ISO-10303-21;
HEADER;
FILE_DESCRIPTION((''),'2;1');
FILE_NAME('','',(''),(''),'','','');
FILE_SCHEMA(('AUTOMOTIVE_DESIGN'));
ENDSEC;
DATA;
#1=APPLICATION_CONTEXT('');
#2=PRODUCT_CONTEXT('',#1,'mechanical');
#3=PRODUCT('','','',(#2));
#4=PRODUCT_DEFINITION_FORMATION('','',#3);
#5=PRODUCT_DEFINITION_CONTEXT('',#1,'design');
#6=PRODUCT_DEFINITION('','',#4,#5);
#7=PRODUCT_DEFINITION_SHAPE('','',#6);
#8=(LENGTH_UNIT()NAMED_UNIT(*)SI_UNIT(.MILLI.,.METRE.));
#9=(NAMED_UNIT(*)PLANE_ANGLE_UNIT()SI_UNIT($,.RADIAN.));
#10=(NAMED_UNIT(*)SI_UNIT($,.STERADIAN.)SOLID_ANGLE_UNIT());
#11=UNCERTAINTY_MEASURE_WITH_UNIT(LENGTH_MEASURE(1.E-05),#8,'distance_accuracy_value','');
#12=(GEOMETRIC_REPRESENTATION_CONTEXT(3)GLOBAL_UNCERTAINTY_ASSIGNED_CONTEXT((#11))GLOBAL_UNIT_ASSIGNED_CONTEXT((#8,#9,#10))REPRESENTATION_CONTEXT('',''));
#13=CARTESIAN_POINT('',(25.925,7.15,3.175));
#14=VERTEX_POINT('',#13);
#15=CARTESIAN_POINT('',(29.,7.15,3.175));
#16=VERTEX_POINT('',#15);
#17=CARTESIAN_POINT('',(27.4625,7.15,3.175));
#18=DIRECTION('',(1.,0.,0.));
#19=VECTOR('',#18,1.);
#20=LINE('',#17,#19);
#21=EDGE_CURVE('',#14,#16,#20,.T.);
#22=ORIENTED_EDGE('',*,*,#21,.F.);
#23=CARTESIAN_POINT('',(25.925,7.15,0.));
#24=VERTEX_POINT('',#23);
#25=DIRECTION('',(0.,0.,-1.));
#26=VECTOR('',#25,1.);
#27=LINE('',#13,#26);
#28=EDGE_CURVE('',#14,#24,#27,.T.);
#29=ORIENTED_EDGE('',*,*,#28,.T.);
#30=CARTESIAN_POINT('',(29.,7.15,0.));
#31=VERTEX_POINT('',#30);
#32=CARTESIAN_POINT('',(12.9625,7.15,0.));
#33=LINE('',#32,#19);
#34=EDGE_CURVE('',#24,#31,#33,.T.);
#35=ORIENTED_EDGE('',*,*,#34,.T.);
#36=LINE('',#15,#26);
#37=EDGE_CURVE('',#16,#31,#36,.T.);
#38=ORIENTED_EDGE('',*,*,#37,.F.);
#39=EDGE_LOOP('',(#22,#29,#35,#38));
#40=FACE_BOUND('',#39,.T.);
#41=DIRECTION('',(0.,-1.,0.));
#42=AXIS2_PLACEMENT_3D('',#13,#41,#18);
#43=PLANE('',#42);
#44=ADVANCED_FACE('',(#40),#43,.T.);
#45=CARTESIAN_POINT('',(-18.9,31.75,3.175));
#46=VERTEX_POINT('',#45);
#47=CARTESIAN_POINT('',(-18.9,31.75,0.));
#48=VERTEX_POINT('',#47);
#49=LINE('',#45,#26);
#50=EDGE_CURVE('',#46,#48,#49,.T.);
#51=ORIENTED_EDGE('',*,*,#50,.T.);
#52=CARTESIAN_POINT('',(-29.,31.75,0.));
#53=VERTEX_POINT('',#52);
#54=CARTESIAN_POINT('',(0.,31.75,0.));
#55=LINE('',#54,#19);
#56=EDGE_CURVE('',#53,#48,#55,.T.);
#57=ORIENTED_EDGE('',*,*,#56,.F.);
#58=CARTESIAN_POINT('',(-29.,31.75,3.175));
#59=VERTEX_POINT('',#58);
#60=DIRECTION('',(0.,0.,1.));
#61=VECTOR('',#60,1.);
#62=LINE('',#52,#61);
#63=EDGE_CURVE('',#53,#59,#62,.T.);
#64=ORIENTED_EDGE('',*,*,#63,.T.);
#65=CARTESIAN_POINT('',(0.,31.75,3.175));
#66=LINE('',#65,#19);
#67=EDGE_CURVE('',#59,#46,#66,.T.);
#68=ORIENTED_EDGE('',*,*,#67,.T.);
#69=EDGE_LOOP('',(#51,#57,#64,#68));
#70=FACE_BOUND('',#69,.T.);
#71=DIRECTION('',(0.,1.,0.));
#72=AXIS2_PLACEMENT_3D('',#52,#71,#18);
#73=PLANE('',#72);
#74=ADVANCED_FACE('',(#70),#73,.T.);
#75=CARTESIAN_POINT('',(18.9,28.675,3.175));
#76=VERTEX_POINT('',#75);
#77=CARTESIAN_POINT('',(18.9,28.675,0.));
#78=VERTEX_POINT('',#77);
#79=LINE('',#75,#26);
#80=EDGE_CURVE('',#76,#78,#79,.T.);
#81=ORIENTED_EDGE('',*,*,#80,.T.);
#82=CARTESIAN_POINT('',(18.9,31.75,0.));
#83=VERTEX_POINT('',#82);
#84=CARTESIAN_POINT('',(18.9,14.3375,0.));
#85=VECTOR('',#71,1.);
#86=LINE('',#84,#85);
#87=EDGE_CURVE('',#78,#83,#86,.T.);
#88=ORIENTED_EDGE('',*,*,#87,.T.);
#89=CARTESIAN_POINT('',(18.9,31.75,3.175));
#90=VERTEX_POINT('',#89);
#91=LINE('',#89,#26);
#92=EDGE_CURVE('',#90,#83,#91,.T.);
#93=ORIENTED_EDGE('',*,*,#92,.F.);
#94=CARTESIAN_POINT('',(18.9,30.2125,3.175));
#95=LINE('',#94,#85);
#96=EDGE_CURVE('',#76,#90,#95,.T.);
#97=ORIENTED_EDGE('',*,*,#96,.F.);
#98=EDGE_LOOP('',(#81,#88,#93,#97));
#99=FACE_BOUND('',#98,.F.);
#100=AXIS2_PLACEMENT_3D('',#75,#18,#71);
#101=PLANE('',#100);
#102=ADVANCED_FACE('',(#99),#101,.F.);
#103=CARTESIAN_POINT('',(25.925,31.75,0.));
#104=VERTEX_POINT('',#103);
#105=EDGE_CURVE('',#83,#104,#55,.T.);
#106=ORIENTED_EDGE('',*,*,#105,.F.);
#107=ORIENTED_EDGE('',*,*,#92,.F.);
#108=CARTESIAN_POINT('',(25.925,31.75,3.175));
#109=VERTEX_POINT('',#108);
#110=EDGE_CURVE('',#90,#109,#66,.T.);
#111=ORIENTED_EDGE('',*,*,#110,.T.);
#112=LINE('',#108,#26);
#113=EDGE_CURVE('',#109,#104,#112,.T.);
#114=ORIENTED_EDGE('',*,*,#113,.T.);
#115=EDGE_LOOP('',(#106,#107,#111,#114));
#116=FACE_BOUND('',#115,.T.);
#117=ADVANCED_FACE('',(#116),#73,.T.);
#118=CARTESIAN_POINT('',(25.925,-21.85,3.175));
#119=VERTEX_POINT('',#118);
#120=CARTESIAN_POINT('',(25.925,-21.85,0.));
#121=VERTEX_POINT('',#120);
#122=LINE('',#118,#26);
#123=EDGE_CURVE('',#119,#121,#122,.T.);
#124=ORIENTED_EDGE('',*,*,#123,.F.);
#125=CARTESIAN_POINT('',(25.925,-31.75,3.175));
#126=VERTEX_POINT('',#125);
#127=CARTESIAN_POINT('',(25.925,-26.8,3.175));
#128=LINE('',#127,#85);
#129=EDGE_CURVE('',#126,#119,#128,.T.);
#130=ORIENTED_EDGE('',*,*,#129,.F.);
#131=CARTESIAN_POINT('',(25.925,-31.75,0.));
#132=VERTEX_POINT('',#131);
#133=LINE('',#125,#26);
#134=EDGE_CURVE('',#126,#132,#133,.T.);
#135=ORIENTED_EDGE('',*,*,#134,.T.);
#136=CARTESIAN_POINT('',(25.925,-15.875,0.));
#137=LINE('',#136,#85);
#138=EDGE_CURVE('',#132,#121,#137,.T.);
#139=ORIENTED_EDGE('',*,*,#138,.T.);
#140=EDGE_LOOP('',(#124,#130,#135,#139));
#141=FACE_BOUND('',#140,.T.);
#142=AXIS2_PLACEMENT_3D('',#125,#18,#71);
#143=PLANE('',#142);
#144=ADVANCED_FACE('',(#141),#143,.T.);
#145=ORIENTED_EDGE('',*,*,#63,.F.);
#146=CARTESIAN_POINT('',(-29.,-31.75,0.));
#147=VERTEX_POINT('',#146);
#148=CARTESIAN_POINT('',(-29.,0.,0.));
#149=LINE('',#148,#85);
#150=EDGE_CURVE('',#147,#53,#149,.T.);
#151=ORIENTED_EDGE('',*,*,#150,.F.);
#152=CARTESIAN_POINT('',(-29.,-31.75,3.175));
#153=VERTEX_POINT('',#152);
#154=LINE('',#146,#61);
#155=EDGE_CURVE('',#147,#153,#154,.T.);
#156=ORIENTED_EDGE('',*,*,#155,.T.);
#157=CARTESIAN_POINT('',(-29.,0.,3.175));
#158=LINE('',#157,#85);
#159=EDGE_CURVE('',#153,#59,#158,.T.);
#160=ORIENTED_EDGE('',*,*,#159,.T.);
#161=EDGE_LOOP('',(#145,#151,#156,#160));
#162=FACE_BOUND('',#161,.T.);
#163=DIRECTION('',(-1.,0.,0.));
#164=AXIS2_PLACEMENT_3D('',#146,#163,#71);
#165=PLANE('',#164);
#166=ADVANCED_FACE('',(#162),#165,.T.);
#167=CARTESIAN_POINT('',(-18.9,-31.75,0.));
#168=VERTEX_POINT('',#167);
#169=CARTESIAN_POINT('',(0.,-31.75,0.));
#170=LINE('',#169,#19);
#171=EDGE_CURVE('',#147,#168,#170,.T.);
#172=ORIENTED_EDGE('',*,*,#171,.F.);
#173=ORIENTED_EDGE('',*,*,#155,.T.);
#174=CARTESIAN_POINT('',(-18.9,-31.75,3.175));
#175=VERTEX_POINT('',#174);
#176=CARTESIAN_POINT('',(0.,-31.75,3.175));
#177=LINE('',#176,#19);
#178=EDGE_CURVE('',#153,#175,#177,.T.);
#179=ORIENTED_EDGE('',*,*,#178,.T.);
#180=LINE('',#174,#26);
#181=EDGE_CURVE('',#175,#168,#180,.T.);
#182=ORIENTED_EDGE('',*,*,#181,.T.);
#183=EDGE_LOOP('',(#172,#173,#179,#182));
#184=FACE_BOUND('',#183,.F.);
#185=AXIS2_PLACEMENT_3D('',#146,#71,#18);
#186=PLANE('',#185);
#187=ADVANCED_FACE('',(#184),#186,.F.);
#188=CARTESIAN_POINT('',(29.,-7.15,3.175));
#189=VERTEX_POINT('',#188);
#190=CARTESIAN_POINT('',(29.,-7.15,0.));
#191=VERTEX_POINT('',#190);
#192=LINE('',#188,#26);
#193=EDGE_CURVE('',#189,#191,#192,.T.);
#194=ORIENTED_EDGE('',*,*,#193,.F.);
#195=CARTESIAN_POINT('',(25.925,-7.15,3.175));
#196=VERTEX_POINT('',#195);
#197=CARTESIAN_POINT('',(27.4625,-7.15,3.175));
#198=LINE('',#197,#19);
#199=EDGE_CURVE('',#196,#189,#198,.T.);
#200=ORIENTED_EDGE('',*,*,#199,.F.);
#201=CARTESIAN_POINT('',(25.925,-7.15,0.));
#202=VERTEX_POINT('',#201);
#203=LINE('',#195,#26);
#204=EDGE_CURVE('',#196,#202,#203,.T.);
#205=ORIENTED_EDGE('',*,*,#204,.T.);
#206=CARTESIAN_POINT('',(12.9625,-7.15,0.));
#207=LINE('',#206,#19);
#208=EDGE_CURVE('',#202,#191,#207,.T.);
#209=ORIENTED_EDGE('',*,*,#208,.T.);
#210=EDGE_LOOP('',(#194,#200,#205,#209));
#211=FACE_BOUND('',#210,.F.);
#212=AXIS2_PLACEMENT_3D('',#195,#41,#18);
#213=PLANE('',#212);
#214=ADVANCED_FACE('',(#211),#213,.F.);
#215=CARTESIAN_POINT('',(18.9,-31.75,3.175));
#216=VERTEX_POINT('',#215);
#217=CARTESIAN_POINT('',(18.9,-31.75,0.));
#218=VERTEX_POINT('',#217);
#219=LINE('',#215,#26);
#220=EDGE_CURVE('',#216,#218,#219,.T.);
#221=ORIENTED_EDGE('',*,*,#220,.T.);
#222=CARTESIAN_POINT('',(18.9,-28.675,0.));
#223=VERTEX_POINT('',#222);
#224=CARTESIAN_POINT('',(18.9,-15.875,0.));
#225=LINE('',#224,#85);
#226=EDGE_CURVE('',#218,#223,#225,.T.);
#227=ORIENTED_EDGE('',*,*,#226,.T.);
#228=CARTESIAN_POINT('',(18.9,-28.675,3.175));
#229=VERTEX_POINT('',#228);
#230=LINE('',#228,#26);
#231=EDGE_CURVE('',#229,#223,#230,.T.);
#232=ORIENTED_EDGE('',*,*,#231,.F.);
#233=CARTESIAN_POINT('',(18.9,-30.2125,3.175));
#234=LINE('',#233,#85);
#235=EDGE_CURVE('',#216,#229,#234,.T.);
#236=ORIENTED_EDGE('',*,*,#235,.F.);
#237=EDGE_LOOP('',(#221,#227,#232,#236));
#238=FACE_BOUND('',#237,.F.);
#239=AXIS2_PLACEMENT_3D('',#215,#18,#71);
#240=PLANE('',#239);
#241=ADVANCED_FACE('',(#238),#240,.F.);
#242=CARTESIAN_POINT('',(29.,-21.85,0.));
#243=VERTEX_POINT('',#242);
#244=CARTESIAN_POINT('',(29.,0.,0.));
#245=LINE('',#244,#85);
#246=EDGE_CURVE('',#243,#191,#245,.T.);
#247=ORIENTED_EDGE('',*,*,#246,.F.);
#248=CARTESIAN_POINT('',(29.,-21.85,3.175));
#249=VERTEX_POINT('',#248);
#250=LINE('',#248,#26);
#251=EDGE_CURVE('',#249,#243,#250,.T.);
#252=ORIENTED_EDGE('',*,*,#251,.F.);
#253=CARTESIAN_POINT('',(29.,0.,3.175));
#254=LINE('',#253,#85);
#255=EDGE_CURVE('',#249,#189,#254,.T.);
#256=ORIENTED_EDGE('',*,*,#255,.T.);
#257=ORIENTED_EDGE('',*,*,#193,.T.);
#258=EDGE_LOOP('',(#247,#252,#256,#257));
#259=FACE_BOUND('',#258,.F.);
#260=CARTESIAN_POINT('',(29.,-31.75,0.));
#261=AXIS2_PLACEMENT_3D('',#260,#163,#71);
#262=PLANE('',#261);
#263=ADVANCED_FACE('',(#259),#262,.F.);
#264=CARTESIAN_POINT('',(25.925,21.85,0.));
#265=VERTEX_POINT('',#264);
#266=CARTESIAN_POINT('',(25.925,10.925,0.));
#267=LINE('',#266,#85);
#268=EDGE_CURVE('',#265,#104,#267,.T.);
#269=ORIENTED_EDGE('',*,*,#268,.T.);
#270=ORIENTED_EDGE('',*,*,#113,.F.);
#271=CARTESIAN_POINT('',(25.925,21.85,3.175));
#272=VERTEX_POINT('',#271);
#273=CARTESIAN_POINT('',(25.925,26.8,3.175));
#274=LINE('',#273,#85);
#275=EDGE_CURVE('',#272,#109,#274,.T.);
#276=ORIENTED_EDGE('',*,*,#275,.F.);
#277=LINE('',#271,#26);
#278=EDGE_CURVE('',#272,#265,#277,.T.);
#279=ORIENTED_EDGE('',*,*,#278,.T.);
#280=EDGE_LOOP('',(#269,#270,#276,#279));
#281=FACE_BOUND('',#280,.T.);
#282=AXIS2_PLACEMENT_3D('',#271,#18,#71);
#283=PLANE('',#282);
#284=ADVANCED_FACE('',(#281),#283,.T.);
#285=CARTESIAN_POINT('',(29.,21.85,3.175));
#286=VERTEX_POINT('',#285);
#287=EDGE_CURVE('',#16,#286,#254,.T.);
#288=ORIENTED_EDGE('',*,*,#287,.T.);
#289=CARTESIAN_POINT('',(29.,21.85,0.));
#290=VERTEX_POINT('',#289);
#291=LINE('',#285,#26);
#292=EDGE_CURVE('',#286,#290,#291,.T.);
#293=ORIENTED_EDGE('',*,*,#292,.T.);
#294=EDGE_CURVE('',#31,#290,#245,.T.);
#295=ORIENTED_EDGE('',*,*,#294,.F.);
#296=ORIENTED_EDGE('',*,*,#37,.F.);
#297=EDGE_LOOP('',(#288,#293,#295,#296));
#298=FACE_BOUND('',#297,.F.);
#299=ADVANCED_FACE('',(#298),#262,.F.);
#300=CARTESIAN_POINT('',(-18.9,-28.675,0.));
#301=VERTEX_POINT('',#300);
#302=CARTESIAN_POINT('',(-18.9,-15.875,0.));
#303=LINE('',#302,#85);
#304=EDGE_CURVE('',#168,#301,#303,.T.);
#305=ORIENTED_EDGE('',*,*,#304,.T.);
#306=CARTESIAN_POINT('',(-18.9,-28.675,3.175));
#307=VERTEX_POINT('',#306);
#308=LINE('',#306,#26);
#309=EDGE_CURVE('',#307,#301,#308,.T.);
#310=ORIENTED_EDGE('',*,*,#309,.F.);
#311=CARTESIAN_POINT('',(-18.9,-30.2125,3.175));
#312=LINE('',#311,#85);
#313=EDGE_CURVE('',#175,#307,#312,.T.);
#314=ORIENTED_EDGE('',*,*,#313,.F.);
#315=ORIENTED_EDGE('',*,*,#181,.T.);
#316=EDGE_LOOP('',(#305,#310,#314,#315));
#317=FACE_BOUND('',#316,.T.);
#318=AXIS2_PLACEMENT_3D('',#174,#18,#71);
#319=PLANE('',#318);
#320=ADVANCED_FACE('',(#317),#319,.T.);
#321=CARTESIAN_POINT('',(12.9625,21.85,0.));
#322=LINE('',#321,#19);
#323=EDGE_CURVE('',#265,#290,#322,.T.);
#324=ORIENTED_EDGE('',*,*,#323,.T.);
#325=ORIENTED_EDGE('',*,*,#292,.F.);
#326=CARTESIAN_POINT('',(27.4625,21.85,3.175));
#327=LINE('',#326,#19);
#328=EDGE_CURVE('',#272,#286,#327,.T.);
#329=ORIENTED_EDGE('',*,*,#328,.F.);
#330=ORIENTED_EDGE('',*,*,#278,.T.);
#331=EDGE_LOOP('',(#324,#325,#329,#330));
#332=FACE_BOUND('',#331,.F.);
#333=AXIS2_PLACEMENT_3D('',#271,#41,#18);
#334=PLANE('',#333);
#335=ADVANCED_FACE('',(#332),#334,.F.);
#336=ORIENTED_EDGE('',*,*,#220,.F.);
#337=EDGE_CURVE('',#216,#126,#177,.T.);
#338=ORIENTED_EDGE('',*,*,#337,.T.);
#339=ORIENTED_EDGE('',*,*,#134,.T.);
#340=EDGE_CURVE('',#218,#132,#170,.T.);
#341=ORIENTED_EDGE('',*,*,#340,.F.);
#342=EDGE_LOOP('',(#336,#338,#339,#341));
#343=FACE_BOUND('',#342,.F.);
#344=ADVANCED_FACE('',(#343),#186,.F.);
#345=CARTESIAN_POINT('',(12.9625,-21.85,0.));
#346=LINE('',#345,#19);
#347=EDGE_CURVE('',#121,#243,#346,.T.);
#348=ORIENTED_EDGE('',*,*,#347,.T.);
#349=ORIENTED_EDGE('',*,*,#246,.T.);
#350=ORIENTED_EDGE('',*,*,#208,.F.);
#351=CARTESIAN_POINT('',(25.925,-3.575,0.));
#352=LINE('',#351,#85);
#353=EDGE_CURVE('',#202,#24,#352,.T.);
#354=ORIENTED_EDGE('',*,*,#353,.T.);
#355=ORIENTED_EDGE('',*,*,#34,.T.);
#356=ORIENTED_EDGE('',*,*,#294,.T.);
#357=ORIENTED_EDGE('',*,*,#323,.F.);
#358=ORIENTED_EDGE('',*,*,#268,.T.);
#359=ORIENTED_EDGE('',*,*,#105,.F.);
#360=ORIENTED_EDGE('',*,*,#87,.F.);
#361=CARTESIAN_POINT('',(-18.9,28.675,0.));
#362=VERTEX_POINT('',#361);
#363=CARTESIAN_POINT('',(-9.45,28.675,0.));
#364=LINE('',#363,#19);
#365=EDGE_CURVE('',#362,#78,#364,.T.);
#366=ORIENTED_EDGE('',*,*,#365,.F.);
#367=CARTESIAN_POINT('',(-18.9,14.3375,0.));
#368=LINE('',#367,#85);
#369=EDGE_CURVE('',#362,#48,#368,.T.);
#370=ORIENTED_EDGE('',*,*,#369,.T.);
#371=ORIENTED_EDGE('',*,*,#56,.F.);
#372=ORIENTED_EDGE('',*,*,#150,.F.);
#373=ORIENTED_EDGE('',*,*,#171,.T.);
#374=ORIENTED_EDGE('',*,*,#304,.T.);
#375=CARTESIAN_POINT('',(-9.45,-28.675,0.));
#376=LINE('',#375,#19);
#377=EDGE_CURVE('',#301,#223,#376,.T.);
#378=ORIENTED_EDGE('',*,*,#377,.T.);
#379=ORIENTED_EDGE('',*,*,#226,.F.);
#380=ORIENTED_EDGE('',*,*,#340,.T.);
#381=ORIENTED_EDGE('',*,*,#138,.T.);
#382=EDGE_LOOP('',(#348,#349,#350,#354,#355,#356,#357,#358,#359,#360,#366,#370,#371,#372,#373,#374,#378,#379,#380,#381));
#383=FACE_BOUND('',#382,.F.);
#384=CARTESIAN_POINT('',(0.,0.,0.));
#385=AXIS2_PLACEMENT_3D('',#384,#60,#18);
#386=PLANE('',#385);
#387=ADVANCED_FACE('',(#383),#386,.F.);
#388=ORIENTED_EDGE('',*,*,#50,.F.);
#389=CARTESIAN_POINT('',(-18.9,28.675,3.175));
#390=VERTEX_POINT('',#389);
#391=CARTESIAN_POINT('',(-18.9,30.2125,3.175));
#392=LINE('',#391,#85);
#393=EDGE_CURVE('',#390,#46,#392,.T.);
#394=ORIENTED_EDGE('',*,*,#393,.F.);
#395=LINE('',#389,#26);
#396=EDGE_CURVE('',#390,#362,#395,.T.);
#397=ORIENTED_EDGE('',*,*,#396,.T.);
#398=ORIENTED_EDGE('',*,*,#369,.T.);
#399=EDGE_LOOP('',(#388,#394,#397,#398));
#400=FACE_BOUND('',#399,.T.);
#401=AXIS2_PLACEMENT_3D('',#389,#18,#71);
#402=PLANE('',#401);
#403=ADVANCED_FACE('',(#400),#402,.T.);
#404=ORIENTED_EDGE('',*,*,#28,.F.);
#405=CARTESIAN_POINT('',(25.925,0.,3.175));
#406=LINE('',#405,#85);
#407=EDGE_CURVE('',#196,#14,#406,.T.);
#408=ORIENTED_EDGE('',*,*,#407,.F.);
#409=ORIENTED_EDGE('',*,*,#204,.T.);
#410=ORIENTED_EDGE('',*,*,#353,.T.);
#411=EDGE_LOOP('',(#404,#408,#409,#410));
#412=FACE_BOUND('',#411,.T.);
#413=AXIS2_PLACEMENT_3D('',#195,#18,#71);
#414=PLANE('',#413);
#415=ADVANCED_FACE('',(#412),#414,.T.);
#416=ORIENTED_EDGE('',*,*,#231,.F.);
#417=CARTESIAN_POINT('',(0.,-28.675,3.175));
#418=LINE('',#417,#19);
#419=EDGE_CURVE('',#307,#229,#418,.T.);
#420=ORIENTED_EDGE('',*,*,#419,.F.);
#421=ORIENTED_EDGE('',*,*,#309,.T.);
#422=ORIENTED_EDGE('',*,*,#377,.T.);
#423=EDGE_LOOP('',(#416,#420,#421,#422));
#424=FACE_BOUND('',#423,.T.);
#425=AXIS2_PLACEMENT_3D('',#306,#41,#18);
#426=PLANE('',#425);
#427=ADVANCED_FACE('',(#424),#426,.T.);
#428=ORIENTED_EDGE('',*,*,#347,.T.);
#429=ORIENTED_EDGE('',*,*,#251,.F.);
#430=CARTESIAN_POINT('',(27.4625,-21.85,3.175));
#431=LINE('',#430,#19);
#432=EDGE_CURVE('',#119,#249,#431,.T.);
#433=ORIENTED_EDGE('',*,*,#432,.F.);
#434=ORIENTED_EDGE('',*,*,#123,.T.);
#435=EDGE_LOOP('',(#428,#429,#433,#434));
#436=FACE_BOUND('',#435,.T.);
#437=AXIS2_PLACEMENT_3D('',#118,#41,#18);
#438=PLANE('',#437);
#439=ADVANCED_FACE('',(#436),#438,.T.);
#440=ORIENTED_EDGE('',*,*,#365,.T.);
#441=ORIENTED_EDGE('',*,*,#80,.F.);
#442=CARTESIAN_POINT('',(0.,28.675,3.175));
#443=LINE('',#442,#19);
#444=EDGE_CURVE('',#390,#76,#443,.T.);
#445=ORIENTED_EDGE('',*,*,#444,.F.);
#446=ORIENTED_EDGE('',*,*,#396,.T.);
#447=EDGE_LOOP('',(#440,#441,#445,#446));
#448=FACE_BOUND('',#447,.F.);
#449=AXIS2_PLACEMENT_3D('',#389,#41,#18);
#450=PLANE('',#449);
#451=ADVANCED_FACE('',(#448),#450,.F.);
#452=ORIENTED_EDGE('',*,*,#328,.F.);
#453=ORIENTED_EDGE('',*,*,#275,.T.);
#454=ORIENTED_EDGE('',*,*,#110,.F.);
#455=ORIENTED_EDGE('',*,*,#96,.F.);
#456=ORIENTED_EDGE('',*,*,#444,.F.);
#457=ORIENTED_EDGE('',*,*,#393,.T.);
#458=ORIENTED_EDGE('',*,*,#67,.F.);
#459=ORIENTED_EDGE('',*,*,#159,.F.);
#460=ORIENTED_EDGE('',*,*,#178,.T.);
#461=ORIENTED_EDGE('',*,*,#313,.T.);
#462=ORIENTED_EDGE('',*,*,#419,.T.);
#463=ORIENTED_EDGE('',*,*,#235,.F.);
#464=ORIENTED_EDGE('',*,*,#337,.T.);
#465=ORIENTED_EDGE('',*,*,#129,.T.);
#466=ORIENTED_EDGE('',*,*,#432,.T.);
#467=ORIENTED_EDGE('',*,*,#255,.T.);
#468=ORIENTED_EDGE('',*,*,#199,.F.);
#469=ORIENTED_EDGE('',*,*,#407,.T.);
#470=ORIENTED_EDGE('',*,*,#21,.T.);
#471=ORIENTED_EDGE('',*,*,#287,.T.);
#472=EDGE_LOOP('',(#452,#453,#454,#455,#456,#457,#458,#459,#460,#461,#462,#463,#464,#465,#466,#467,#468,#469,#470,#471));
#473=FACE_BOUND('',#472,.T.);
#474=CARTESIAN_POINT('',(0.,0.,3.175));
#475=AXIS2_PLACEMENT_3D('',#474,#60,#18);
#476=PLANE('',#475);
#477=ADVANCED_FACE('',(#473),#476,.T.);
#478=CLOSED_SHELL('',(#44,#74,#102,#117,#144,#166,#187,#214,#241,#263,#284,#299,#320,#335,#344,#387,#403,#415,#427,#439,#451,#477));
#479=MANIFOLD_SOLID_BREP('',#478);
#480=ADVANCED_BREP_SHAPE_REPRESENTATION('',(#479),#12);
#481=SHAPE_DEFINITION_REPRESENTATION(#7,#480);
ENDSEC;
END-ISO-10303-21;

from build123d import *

# Parameters (mm, degrees)
F0_W     = 58
F0_H     = 63.5
F1_DEPTH = 3.175
F2_W     = 37.8
F2_H     = 3.075
F2_W_2   = 3.075
F2_H_2   = 14.3
F2_H_3   = 9.9
F3_DEPTH = 25


# Not quite as in the source:
# - a length typed as a fraction of an inch, garbled in the dataset ("3 / 203.2 mm" for 3/8 in), is restored


with BuildPart() as f1:
    # F0 (on Top) → F1 (new body)
    with BuildSketch(Plane.XY):
        Rectangle(F0_W, F0_H)
    extrude(amount=F1_DEPTH)

    # F2 (on face) → F3 (cut)
    with BuildSketch(Plane.XY.offset(3.175)):
        with Locations((0, -30.2125)):
            Rectangle(F2_W, F2_H)
        with Locations((0, 30.2125)):
            Rectangle(F2_W, F2_H)
        with Locations((27.4625, 0)):
            Rectangle(F2_W_2, F2_H_2)
        with Locations((27.4625, -26.8)):
            Rectangle(F2_W_2, F2_H_3)
        with Locations((27.4625, 26.8)):
            Rectangle(F2_W_2, F2_H_3)
    extrude(amount=-F3_DEPTH, mode=Mode.SUBTRACT)


solid = f1.part
